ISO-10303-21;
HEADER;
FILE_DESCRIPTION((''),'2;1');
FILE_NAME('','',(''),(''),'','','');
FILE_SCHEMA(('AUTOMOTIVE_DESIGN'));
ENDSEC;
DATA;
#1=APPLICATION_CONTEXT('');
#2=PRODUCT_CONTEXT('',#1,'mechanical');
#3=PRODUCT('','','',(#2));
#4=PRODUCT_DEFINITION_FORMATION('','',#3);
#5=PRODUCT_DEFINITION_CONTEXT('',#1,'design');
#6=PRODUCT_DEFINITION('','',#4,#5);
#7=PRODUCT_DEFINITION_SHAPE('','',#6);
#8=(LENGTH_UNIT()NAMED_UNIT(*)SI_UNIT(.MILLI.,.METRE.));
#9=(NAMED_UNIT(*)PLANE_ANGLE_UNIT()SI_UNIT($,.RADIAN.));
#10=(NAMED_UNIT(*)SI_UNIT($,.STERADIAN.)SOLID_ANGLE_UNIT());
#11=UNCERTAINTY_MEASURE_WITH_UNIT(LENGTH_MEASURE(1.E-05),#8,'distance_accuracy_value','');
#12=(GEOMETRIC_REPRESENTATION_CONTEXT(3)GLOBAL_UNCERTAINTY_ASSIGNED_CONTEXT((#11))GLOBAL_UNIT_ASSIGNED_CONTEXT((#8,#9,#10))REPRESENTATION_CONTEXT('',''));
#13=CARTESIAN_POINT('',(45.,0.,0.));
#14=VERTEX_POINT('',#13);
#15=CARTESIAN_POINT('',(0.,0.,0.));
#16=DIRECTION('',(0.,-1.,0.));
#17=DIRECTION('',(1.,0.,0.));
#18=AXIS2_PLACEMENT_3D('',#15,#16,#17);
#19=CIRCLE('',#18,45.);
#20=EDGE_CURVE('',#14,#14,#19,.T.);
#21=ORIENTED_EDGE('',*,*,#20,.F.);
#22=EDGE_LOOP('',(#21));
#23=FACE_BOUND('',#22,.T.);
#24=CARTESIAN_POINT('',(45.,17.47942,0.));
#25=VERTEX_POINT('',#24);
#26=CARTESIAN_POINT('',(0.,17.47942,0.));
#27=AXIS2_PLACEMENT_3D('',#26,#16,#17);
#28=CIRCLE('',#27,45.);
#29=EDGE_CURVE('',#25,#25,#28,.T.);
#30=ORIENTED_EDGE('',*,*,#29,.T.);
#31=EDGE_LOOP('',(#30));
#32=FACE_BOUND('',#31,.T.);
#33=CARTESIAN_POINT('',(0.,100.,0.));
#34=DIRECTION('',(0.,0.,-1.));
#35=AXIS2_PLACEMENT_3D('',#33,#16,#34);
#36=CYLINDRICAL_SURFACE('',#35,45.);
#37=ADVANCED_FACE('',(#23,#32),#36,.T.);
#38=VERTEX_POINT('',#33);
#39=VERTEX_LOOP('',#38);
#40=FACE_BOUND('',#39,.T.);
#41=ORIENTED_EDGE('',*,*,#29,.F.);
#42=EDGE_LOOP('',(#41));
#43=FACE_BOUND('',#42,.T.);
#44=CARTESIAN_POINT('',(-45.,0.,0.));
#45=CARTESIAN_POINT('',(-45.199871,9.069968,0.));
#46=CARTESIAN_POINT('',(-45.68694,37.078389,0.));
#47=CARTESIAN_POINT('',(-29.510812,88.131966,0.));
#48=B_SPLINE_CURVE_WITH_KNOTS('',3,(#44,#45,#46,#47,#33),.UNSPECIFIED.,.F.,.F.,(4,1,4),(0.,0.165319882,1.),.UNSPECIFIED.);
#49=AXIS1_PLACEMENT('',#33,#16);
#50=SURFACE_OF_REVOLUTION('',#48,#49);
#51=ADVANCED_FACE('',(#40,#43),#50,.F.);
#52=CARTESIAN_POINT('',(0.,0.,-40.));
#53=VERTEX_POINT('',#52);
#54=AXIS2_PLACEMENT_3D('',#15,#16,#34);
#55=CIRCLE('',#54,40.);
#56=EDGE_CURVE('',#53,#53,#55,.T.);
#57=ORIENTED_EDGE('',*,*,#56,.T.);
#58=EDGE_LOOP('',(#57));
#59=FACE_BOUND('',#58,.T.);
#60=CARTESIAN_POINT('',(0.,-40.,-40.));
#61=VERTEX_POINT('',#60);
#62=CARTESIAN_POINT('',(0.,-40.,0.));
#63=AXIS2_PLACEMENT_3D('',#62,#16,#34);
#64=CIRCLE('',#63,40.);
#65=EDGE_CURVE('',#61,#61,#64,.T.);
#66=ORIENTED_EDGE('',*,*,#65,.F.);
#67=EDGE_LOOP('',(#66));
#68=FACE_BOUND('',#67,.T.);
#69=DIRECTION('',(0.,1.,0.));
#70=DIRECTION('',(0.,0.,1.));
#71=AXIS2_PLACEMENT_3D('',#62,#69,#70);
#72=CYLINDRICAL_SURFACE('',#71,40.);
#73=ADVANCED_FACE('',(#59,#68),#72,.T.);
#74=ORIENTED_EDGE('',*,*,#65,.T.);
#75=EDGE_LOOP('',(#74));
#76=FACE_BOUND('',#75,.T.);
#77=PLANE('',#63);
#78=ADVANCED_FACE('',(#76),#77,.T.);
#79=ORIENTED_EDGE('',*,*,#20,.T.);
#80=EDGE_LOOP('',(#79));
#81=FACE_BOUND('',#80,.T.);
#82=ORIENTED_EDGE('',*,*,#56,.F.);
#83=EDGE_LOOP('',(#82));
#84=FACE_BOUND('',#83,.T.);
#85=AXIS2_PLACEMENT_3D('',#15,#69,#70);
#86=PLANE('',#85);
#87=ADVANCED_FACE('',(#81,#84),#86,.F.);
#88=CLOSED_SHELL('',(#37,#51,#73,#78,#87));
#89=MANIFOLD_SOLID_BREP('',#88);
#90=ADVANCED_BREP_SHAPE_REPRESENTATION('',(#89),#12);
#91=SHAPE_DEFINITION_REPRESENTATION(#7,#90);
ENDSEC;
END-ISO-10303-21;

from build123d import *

# Parameters (mm, degrees)
SKETCH6_R           = 45
BOSS_EXTRUDE7_DEPTH = 100
SKETCH8_R           = 40
BOSS_EXTRUDE8_DEPTH = 40


with BuildPart() as part:
    # Sketch6 → Boss-Extrude7 (new body)
    with BuildSketch(Plane(origin=(0, 0, 0), x_dir=(1, 0, 0), z_dir=(0, 1, 0))):
        with Locations(Location((0, 0, 0), (0, 0, 270))):
            Circle(SKETCH6_R)
    extrude(amount=BOSS_EXTRUDE7_DEPTH)


with BuildPart() as body_2:
    # Sketch7 → Revolve2 (revolve)
    with BuildSketch(Plane.XY, mode=Mode.PRIVATE) as revolve2_sk:
        with BuildLine():
            Line((0, 100), (0, 125.083403494))
            Line((0, 125.083403494), (-88.216224583, 125.083403494))
            Line((-88.216224583, 125.083403494), (-88.216224583, 0))
            Line((-88.216224583, 0), (-45, 0))
            add(Edge.make_bspline(
                [(-45, 0), (-45.199870538, 9.069967987), (-45.686940304, 37.078388642), (-29.510811545, 88.131965608), (0, 100)],
                knots=[0, 0, 0, 0, 0.165319882, 1, 1, 1, 1], degree=3))
        make_face()
    revolve(revolve2_sk.sketch.rotate(Axis((0, 100, 0), (0, 1, 0)), 180), axis=Axis((0, 100, 0), (0, 1, 0)))


with BuildPart() as part_1:
    add(part.part)

    # Intersect1: read off the stored shape, not the designer's step
    # Intersect1: cut body 2
    add(body_2.part, mode=Mode.SUBTRACT)

    # Sketch8 → Boss-Extrude8 (add)
    with BuildSketch(Plane.XZ):
        with Locations(Location((0, 0, 0), (0, 0, 270))):
            Circle(SKETCH8_R)
    extrude(amount=BOSS_EXTRUDE8_DEPTH)


solid = part_1.part
